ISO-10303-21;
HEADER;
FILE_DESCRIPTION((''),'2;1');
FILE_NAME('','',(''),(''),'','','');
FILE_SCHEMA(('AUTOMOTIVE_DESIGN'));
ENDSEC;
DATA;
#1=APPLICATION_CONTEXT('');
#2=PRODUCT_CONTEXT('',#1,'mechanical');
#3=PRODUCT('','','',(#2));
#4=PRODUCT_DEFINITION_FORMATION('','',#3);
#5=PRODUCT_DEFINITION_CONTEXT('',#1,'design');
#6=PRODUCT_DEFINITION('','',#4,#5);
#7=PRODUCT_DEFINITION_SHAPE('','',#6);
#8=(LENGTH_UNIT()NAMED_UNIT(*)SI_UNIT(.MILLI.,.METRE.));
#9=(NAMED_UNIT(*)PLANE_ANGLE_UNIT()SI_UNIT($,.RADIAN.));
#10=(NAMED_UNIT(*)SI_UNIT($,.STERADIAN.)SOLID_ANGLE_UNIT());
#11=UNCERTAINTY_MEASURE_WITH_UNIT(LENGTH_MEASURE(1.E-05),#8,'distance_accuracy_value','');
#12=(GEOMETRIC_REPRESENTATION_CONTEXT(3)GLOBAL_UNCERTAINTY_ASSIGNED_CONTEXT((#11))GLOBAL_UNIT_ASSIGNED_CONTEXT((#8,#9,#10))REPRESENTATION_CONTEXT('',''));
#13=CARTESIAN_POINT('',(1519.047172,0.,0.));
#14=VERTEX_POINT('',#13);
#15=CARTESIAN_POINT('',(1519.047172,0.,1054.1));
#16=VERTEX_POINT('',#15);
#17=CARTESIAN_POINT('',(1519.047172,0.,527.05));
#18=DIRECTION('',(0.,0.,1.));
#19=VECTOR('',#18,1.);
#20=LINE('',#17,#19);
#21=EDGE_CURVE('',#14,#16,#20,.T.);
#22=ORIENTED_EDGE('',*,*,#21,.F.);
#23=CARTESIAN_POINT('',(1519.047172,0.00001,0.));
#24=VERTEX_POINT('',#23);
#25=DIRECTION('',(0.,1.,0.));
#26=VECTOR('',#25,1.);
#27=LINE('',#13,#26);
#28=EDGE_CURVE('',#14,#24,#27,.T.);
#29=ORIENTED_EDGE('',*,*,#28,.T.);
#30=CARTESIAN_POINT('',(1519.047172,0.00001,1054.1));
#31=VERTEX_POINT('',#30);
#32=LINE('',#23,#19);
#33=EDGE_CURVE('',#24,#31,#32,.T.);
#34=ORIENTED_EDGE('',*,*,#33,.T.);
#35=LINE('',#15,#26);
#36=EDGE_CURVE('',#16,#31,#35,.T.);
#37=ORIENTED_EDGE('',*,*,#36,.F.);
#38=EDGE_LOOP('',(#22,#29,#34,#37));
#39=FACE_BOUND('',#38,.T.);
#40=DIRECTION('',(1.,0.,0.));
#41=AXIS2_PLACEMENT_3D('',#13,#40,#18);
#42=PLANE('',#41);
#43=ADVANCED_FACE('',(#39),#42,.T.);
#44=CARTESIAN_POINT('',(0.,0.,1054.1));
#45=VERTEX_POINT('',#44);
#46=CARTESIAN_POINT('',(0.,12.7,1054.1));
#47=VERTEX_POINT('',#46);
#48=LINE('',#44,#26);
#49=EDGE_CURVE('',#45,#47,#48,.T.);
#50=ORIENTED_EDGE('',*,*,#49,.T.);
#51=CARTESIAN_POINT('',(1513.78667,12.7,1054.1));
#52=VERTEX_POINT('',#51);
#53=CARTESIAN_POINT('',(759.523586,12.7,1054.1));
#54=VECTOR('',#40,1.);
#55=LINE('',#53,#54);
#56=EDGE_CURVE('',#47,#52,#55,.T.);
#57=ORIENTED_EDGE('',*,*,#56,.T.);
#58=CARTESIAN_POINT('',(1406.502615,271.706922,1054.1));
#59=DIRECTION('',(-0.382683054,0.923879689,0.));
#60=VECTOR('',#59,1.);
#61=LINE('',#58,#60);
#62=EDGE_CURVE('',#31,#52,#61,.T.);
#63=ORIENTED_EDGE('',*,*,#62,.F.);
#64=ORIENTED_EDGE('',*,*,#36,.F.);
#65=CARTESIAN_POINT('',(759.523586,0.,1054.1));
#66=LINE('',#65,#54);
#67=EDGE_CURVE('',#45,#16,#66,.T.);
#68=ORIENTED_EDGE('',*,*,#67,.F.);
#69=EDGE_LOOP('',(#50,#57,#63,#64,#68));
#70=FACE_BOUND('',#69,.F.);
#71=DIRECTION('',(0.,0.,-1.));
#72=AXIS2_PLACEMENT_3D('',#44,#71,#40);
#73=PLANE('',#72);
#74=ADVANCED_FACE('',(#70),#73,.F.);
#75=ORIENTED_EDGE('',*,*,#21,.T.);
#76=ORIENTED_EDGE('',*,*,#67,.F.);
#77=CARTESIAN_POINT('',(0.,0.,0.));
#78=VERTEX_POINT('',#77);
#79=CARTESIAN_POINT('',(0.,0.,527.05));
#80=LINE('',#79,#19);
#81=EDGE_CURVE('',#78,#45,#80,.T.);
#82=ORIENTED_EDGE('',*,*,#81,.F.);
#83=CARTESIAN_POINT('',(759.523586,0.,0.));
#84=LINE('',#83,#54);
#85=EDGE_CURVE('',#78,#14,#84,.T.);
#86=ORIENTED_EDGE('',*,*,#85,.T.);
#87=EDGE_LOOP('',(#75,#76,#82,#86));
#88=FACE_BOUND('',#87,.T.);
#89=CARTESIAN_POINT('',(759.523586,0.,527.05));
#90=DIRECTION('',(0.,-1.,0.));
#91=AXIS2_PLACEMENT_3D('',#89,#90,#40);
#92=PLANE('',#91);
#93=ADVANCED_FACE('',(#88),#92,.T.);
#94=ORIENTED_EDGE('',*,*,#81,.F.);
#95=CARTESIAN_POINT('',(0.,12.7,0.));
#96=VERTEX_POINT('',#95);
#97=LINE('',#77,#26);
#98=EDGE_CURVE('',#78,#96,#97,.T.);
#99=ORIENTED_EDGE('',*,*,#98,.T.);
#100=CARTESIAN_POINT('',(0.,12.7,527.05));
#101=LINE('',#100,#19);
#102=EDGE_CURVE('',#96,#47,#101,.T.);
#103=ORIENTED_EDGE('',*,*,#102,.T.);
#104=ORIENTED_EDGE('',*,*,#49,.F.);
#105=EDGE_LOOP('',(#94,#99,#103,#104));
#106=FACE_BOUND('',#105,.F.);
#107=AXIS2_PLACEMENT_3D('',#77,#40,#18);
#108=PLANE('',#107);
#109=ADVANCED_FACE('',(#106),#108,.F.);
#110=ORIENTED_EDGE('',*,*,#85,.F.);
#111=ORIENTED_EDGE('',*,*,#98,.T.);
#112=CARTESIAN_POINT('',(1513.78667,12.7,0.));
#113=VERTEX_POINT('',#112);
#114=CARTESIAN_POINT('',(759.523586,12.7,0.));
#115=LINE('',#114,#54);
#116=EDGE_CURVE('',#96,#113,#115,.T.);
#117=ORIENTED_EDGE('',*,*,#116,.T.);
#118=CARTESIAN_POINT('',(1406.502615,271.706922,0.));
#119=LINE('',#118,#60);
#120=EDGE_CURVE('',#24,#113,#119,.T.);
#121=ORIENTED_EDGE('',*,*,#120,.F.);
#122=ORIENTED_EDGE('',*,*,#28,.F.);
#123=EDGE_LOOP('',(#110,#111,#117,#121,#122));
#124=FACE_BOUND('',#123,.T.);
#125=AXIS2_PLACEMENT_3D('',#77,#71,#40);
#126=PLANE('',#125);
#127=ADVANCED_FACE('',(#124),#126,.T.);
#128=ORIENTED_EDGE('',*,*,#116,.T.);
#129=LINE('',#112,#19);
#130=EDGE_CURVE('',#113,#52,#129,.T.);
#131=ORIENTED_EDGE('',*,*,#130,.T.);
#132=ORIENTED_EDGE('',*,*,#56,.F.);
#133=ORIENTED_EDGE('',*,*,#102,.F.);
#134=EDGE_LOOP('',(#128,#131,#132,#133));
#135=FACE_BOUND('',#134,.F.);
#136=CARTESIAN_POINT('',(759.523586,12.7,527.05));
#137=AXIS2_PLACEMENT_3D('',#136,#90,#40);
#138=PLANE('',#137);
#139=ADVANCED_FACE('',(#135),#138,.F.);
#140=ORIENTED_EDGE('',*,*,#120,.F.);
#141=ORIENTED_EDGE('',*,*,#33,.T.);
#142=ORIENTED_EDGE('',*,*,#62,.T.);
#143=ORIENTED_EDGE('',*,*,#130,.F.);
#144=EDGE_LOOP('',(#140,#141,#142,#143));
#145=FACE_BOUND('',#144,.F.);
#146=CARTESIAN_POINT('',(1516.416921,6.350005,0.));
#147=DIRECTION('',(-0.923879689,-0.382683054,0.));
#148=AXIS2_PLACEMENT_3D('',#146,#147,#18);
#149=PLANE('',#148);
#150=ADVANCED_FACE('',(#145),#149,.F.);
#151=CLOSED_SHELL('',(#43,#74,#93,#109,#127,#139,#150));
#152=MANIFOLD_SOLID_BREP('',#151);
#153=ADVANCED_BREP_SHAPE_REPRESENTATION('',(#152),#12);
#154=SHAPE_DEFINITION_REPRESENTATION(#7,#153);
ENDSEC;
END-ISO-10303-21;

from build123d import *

# Parameters (mm, degrees)
F0_W     = 1519.0471722421
F0_H     = 1054.1
F1_DEPTH = 12.7
F2_SIZE2 = 5.260502
F2_SIZE  = 12.69999


# Not quite as in the source:
# - a fillet or chamfer is up to 0.001 mm smaller than in the source, because OpenCascade refuses the exact size


with BuildPart() as f1:
    # F0 (on Front) → F1 (new body)
    with BuildSketch(Plane.XZ):
        with Locations((759.5235861211, 527.05)):
            Rectangle(F0_W, F0_H)
    extrude(amount=-F1_DEPTH)

    # F2 (size 12.7 and 5.2605122421 in the source; OpenCascade refuses exactly that, so slightly less here)
    f2_edges = [f1.edges().sort_by_distance(p)[0] for p in [
        (1519.047172, 12.7, 527.05),
    ]]
    f2_side = f1.faces().sort_by_distance((1519.047172, 6.35, 527.05))[0]
    chamfer(f2_edges, length=F2_SIZE, length2=F2_SIZE2, reference=f2_side)


solid = f1.part
